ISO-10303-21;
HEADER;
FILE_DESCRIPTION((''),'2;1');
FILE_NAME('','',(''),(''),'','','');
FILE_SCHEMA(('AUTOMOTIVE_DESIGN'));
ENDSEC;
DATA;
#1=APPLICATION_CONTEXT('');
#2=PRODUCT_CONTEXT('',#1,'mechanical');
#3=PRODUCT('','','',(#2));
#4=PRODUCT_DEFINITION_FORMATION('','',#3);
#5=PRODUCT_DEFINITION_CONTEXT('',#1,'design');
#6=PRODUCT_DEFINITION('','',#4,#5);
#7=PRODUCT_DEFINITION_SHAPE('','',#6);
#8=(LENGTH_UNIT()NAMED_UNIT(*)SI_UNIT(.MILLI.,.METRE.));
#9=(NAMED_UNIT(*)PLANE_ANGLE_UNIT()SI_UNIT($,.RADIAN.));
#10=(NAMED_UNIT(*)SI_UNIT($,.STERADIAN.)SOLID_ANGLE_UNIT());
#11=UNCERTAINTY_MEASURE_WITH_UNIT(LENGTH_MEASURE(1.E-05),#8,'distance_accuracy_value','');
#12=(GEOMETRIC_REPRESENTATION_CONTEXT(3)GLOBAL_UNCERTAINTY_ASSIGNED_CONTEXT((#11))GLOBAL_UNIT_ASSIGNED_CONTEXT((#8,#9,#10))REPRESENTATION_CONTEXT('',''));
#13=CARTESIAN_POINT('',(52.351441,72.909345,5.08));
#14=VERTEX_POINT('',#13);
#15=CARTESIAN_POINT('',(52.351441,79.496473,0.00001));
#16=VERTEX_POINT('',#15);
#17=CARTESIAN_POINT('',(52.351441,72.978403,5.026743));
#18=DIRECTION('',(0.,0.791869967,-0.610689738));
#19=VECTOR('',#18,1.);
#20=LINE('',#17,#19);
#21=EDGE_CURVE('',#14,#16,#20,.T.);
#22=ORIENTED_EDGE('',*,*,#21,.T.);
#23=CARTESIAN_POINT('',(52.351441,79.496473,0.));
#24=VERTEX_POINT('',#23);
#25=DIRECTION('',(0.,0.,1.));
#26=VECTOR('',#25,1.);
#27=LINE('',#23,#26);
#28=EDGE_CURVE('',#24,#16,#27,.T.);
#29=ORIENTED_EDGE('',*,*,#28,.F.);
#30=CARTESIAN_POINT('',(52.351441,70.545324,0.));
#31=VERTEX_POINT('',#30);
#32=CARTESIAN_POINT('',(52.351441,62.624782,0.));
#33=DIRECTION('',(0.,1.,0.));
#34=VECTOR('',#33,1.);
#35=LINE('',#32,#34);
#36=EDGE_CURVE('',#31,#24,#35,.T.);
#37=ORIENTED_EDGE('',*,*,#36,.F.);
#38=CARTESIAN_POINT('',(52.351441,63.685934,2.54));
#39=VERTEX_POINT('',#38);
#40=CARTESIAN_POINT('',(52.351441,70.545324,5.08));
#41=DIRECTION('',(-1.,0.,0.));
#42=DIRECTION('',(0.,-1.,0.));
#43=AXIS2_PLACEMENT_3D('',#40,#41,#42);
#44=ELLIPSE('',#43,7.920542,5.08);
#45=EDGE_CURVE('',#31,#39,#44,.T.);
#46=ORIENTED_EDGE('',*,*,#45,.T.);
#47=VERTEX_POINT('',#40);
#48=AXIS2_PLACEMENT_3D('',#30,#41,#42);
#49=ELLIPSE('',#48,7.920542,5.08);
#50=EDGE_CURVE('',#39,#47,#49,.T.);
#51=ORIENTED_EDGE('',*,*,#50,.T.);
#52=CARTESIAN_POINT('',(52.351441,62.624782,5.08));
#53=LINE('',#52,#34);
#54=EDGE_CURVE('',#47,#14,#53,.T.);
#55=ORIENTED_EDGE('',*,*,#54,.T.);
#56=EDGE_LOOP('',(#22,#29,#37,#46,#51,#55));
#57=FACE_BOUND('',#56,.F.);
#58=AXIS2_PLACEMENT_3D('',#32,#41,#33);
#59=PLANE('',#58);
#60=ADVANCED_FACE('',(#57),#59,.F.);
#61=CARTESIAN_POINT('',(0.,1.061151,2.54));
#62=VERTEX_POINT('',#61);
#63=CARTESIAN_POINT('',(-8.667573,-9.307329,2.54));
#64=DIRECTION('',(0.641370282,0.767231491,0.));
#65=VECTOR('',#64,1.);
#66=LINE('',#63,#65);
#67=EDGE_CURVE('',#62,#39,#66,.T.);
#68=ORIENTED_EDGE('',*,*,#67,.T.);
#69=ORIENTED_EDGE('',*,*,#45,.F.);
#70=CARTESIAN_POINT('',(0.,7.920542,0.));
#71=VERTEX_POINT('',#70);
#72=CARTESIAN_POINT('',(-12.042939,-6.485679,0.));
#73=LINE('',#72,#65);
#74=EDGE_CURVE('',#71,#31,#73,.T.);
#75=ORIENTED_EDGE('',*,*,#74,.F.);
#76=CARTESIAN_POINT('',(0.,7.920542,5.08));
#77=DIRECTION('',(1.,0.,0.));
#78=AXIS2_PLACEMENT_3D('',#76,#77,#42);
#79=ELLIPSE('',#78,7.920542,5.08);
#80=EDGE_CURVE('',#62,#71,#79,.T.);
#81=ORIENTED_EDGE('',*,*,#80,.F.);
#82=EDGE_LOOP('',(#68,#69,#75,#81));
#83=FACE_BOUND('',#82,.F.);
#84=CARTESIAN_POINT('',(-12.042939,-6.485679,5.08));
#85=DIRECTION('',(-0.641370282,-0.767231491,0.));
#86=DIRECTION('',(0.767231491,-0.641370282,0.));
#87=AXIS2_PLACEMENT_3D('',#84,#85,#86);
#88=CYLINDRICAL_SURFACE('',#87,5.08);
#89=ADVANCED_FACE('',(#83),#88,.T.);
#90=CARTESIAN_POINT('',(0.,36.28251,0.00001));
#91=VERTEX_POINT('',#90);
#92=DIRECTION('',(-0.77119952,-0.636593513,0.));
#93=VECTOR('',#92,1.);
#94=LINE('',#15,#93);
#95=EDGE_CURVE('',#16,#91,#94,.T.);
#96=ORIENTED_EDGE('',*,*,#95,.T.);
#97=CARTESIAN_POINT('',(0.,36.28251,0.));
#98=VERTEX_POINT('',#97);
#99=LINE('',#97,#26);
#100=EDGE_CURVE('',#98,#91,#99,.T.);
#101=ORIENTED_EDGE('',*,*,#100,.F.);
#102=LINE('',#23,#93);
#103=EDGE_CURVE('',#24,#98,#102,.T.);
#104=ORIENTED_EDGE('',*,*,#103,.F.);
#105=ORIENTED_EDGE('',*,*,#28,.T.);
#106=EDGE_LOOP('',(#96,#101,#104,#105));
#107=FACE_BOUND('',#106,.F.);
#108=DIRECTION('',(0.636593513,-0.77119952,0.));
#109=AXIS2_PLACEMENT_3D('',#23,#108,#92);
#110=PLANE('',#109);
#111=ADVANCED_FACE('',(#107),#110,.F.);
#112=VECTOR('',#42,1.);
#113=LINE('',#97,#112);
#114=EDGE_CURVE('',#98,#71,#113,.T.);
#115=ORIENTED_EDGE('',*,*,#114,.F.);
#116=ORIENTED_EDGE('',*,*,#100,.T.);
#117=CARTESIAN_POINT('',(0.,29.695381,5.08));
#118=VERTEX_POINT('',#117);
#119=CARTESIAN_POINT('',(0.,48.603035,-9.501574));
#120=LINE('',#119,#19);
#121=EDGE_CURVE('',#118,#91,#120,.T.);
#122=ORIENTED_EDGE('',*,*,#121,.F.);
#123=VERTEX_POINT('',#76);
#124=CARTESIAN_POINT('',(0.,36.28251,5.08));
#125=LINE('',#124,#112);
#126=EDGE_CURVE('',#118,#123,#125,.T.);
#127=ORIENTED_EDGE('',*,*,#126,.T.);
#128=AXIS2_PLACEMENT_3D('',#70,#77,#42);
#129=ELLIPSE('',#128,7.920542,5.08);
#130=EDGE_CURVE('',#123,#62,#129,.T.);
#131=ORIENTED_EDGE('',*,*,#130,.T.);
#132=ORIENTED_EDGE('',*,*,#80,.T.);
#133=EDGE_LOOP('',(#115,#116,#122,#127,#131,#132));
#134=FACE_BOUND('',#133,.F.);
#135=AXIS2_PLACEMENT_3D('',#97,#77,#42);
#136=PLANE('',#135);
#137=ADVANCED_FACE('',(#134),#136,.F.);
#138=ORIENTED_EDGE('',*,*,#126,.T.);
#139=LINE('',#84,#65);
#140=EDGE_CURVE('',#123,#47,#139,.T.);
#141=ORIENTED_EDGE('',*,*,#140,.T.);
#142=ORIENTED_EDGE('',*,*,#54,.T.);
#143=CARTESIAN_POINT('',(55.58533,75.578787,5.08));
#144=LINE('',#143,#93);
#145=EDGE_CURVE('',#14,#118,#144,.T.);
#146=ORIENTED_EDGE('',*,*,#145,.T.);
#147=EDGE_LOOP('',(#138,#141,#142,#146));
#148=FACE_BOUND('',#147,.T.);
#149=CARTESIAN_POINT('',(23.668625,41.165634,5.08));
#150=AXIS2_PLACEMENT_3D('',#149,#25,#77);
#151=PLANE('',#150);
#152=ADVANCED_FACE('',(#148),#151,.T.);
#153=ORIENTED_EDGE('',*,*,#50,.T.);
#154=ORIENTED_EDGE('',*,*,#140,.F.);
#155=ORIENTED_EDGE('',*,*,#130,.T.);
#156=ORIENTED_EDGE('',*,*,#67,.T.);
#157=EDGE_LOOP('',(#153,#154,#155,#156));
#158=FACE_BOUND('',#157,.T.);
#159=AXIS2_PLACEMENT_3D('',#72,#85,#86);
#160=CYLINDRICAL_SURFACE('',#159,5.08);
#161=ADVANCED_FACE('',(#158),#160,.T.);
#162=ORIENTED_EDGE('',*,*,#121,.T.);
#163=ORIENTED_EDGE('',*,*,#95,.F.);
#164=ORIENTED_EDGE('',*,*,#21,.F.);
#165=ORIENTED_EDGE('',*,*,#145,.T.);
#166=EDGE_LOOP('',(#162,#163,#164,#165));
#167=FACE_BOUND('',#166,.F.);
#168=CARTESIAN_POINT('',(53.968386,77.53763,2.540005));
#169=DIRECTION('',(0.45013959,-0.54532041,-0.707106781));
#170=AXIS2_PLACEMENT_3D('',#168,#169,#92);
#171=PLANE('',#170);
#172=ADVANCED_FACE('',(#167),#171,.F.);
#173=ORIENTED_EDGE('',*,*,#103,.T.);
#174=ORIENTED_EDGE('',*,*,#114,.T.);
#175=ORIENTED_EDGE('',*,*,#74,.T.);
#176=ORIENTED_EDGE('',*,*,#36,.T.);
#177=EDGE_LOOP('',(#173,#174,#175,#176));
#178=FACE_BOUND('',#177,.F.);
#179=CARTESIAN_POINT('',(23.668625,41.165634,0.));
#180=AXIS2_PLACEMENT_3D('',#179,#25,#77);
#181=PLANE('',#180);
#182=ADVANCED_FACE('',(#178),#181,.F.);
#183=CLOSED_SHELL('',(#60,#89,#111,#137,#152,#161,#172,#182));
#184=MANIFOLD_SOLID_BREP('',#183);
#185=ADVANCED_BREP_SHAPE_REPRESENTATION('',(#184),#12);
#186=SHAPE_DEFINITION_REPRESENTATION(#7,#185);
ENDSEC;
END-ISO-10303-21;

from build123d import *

# Parameters (mm, degrees)
F1_DEPTH    = 5.08
F2_T1_DEPTH = 107.0243637673
F3_SIZE     = 5.07999


# Not quite as in the source:
# - a fillet or chamfer that OpenCascade refuses, or shapes differently, is made with other operations: its cross-section is extruded or revolved along the edge and cut away or added
# - a fillet or chamfer is up to 0.001 mm smaller than in the source, because OpenCascade refuses the exact size


with BuildPart() as f1:
    # F0 (on Top) → F1 (new body)
    with BuildSketch(Plane.XY):
        Polygon((0, 36.2825095654), (0, 0), (52.3514412344, 62.6247823238), (52.3514412344, 79.496473074), align=None)
    extrude(amount=F1_DEPTH)

    # F2: fillet of radius 5.08 on 2 edges, made by hand

    # F2_s2 → F2_t1 (cut)
    with BuildSketch(Plane(origin=(-8.1454025856, -9.7438399371, 0), x_dir=(0, 0, 1), z_dir=(0.6413702823, 0.7672314911, 0))):
        with BuildLine():
            ThreePointArc((0, 0), (3.5921024484, -1.4878975516), (5.08, -5.08))
            Line((5.08, -5.08), (5.08, 0))
            Line((5.08, 0), (0, 0))
        make_face()
        with BuildLine():
            ThreePointArc((5.08, 0), (1.4878975516, -1.4878975516), (0, -5.08))
            Line((0, -5.08), (0, 0))
            Line((0, 0), (5.08, 0))
        make_face()
    extrude(amount=F2_T1_DEPTH, mode=Mode.SUBTRACT)

    # F3 (size 5.08 in the source; OpenCascade refuses exactly that, so slightly less here)
    f3_edges = [f1.edges().sort_by_distance(p)[0] for p in [
        (26.175721, 57.889491, 5.08),
    ]]
    chamfer(f3_edges, length=F3_SIZE)


solid = f1.part
